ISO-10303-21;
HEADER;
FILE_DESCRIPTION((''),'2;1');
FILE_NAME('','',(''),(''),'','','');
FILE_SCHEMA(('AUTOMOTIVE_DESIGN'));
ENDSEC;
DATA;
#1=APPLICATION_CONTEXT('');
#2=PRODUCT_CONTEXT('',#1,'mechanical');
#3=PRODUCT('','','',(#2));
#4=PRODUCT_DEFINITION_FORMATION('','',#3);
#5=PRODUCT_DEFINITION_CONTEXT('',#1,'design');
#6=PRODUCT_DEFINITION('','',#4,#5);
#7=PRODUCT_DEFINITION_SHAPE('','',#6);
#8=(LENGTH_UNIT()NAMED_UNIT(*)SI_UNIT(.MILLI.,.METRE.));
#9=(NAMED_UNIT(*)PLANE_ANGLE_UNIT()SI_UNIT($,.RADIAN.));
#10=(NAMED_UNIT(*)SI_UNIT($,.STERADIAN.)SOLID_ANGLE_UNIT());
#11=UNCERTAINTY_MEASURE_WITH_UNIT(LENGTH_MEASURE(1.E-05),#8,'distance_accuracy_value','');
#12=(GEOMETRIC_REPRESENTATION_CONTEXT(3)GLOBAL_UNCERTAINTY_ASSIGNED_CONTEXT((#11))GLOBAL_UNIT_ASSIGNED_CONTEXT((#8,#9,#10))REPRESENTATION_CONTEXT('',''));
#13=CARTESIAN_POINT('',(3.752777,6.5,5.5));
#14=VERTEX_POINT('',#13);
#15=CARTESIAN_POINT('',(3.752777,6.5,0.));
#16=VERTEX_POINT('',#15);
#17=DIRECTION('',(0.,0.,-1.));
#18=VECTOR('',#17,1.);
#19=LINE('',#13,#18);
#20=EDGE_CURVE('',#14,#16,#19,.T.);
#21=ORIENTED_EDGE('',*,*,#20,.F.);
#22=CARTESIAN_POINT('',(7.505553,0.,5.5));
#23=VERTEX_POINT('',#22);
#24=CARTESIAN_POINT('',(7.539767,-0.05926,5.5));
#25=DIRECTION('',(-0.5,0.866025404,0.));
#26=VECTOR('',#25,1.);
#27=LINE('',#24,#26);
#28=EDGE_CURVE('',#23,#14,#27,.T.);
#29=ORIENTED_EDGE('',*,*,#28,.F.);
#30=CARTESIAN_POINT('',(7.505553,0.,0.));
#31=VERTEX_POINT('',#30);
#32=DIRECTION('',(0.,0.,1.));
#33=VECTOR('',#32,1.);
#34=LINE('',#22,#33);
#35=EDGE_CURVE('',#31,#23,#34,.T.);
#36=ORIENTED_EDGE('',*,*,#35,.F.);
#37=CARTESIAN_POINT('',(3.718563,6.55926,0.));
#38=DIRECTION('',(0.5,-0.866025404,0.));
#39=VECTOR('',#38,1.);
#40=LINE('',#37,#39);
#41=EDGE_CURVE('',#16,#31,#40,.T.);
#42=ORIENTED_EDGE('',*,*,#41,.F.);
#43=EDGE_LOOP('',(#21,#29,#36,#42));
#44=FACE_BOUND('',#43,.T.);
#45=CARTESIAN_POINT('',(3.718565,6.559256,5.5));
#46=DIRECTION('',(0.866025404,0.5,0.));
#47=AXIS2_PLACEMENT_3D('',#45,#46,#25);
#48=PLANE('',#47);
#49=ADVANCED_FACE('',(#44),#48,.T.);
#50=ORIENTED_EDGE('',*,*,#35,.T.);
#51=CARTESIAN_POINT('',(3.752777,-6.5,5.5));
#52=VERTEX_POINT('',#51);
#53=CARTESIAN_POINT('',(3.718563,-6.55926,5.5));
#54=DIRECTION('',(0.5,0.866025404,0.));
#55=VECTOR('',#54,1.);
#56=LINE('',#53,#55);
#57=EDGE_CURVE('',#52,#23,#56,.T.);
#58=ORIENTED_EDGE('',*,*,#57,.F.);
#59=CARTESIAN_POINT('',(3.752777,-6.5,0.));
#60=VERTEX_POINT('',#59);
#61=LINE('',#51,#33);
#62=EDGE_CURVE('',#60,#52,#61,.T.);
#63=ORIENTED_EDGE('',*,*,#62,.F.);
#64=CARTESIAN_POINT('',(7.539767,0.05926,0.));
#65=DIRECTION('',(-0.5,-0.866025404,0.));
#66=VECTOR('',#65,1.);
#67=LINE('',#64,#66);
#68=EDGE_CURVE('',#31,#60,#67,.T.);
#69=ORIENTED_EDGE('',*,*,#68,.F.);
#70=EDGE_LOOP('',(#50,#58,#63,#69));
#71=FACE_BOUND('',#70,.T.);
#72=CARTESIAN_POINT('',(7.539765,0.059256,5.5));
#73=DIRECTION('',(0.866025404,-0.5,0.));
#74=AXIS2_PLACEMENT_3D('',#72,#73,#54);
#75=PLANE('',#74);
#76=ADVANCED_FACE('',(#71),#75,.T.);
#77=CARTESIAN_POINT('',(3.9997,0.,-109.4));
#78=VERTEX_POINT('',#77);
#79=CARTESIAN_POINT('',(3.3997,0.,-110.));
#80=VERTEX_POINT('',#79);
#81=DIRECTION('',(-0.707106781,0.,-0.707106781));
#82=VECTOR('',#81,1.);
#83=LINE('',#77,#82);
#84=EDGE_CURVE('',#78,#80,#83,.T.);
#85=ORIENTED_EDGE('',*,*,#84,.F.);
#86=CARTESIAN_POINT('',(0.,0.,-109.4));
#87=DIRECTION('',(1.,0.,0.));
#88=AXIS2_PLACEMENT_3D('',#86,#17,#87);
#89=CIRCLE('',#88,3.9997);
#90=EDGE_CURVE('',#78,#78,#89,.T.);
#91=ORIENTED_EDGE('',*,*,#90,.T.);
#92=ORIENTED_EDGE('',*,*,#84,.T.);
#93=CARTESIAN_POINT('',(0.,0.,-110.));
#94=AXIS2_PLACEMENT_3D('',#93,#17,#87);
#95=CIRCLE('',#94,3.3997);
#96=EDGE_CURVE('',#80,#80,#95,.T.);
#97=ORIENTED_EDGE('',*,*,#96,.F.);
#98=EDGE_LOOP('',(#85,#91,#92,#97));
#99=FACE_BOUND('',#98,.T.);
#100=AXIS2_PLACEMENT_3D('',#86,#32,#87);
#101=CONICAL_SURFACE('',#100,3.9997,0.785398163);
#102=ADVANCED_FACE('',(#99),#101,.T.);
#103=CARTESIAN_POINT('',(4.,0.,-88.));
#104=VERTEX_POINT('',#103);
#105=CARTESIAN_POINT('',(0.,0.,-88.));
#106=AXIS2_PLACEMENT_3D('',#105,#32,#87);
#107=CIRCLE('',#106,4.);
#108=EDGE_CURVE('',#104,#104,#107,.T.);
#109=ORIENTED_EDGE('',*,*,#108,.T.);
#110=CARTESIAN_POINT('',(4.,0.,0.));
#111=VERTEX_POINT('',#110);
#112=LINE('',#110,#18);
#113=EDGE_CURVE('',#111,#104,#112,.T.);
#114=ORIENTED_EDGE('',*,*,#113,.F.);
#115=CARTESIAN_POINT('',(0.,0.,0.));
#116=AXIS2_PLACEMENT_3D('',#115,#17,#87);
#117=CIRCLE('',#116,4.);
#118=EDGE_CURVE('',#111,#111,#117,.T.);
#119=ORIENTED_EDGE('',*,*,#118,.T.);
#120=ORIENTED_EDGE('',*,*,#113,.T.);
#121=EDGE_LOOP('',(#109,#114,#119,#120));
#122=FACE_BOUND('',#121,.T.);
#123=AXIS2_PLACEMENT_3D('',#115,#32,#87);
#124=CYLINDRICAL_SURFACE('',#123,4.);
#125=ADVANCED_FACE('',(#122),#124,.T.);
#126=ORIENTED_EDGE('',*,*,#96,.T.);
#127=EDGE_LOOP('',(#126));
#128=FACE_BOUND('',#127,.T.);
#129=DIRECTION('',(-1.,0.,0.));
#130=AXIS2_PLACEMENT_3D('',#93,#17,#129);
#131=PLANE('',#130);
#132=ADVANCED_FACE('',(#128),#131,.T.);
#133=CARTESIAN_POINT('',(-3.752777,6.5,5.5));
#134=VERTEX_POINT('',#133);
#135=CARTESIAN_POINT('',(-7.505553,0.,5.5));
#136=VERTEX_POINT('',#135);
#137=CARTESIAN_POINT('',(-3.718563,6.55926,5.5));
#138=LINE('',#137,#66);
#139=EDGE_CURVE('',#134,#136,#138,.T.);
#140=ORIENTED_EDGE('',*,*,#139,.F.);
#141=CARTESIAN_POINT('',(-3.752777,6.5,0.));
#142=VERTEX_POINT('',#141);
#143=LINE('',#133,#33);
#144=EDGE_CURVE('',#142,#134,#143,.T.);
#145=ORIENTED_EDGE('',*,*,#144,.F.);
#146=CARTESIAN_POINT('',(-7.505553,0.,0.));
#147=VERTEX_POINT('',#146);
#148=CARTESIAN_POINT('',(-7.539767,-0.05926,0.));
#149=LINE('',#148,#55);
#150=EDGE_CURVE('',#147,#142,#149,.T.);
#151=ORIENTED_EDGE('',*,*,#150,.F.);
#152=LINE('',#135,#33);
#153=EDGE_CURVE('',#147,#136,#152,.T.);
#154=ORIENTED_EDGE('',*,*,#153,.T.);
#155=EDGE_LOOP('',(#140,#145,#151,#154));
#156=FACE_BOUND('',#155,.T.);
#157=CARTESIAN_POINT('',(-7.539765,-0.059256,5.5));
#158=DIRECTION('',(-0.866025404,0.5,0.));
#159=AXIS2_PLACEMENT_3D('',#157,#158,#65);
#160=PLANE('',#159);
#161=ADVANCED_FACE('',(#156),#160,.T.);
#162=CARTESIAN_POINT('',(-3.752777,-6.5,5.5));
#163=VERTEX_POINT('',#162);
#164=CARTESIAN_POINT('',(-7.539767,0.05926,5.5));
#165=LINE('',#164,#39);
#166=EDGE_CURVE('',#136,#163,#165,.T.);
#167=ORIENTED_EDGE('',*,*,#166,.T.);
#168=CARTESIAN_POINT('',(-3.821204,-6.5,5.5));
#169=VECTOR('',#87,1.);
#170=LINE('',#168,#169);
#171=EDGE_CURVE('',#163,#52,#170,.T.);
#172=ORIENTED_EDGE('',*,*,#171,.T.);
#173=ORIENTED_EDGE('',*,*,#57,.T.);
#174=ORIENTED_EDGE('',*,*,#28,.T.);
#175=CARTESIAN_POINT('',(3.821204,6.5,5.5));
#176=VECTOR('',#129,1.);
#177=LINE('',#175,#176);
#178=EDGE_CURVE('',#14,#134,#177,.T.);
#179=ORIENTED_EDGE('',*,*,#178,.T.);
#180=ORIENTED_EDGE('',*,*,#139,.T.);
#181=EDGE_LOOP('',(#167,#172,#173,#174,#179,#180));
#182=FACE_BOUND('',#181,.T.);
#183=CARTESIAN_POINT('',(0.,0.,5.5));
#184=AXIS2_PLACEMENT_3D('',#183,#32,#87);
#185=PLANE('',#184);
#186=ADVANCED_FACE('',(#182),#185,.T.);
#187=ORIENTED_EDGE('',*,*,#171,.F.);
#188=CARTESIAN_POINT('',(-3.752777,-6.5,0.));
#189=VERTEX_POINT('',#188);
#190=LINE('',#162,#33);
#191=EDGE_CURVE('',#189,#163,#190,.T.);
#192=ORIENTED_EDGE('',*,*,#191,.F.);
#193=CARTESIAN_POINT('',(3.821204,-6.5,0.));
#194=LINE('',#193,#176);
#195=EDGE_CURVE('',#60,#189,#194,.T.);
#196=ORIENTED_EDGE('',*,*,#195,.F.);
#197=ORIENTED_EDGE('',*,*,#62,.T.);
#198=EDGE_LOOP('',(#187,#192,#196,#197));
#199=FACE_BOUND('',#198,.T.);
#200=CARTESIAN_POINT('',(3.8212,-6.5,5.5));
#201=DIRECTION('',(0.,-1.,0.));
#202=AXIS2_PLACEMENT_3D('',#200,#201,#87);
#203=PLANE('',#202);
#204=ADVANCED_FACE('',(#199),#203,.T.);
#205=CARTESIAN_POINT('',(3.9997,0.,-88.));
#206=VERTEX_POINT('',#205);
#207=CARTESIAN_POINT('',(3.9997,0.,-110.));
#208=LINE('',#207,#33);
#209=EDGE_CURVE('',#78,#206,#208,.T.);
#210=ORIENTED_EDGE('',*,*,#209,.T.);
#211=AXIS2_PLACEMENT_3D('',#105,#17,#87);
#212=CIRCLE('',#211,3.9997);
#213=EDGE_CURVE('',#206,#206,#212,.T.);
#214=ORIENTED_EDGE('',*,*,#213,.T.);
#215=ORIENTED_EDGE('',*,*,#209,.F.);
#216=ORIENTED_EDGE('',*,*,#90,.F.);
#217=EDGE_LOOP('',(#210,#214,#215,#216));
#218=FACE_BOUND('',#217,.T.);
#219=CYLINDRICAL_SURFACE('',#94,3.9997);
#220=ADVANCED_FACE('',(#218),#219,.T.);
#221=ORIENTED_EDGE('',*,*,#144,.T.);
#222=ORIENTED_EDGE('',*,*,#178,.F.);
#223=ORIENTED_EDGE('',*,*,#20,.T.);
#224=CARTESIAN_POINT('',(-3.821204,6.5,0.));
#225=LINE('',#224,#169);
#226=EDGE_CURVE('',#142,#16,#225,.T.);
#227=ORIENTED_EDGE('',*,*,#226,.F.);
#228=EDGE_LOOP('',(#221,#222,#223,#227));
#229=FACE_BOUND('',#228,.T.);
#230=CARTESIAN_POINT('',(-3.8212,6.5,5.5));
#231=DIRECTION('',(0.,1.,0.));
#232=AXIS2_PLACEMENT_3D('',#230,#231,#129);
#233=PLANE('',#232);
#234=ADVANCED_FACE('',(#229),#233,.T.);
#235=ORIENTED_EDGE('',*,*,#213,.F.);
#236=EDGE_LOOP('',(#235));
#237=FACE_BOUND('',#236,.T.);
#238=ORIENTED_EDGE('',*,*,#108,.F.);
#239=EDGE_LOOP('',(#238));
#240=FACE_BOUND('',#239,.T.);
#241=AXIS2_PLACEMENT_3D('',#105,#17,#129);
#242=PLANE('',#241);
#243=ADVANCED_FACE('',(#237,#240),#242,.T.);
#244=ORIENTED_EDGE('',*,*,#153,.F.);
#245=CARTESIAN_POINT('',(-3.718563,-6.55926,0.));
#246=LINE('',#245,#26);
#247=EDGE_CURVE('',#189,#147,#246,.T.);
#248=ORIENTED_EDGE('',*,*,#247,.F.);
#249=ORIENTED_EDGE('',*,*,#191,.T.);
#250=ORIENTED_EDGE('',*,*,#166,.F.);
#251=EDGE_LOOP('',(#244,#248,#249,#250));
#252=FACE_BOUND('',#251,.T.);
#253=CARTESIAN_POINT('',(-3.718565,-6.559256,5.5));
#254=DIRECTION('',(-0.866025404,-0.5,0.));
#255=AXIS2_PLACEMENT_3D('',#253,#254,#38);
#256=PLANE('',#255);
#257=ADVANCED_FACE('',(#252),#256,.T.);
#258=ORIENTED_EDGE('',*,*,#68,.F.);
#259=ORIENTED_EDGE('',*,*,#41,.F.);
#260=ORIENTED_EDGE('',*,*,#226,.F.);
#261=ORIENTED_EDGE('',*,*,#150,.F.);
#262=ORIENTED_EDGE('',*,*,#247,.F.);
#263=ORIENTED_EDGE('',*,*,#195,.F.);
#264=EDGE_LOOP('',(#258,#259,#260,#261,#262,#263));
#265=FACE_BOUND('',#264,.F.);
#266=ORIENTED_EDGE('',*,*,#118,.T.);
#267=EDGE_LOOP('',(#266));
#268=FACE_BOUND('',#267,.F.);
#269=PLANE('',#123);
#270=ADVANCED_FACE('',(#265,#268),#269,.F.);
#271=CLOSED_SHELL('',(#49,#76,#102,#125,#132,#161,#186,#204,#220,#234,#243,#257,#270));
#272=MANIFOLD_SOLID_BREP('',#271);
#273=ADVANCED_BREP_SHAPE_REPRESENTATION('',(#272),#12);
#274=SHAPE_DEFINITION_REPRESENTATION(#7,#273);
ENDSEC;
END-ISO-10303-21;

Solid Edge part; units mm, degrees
sketch "Sketch1" plane through (0, 0, 0) normal (0, 0, 1) x (1, 0, 0)
  circle A0 centre (0, 0) radius 7.54
  dimension "D1" = 15.08
extrude "Protrusion1" add sketch "Sketch1" along normal blind 5.5
sketch "Sketch2" plane through (0, 0, 0) normal (0, 0, -1) x (1, 0, 0)
  circle A0 centre (0, 0) radius 4
extrude "Protrusion2" add sketch "Sketch2" along normal blind 110
sketch "Sketch3" plane through (0, 0, -110) normal (0, 0, -1) x (1, 0, 0)
  circle A0 centre (0, 0) radius 3.9997
extrude "Cutout1" cut sketch "Sketch3" against normal blind 22 flip side to cut
chamfer "Chamfer_1" distance 0.6 angle 45 1 edges at (-3.9997, 0, -110)
sketch "Sketch4" plane through (0, 0, 5.5) normal (0, 0, 1) x (1, 0, 0)
  line L0 (-3.8212, 6.5) -> (3.8212, 6.5)
  dimension "D1" = 13
extrude "Cutout2" cut sketch "Sketch4" against normal up to next material side at (0, 6.55, 5.5)
pattern_circular "Pattern1" count 6 over 360 about axis through (0, 0, 5.5) along (0, 0, 1) of "Cutout2"
properties part number "116435"
